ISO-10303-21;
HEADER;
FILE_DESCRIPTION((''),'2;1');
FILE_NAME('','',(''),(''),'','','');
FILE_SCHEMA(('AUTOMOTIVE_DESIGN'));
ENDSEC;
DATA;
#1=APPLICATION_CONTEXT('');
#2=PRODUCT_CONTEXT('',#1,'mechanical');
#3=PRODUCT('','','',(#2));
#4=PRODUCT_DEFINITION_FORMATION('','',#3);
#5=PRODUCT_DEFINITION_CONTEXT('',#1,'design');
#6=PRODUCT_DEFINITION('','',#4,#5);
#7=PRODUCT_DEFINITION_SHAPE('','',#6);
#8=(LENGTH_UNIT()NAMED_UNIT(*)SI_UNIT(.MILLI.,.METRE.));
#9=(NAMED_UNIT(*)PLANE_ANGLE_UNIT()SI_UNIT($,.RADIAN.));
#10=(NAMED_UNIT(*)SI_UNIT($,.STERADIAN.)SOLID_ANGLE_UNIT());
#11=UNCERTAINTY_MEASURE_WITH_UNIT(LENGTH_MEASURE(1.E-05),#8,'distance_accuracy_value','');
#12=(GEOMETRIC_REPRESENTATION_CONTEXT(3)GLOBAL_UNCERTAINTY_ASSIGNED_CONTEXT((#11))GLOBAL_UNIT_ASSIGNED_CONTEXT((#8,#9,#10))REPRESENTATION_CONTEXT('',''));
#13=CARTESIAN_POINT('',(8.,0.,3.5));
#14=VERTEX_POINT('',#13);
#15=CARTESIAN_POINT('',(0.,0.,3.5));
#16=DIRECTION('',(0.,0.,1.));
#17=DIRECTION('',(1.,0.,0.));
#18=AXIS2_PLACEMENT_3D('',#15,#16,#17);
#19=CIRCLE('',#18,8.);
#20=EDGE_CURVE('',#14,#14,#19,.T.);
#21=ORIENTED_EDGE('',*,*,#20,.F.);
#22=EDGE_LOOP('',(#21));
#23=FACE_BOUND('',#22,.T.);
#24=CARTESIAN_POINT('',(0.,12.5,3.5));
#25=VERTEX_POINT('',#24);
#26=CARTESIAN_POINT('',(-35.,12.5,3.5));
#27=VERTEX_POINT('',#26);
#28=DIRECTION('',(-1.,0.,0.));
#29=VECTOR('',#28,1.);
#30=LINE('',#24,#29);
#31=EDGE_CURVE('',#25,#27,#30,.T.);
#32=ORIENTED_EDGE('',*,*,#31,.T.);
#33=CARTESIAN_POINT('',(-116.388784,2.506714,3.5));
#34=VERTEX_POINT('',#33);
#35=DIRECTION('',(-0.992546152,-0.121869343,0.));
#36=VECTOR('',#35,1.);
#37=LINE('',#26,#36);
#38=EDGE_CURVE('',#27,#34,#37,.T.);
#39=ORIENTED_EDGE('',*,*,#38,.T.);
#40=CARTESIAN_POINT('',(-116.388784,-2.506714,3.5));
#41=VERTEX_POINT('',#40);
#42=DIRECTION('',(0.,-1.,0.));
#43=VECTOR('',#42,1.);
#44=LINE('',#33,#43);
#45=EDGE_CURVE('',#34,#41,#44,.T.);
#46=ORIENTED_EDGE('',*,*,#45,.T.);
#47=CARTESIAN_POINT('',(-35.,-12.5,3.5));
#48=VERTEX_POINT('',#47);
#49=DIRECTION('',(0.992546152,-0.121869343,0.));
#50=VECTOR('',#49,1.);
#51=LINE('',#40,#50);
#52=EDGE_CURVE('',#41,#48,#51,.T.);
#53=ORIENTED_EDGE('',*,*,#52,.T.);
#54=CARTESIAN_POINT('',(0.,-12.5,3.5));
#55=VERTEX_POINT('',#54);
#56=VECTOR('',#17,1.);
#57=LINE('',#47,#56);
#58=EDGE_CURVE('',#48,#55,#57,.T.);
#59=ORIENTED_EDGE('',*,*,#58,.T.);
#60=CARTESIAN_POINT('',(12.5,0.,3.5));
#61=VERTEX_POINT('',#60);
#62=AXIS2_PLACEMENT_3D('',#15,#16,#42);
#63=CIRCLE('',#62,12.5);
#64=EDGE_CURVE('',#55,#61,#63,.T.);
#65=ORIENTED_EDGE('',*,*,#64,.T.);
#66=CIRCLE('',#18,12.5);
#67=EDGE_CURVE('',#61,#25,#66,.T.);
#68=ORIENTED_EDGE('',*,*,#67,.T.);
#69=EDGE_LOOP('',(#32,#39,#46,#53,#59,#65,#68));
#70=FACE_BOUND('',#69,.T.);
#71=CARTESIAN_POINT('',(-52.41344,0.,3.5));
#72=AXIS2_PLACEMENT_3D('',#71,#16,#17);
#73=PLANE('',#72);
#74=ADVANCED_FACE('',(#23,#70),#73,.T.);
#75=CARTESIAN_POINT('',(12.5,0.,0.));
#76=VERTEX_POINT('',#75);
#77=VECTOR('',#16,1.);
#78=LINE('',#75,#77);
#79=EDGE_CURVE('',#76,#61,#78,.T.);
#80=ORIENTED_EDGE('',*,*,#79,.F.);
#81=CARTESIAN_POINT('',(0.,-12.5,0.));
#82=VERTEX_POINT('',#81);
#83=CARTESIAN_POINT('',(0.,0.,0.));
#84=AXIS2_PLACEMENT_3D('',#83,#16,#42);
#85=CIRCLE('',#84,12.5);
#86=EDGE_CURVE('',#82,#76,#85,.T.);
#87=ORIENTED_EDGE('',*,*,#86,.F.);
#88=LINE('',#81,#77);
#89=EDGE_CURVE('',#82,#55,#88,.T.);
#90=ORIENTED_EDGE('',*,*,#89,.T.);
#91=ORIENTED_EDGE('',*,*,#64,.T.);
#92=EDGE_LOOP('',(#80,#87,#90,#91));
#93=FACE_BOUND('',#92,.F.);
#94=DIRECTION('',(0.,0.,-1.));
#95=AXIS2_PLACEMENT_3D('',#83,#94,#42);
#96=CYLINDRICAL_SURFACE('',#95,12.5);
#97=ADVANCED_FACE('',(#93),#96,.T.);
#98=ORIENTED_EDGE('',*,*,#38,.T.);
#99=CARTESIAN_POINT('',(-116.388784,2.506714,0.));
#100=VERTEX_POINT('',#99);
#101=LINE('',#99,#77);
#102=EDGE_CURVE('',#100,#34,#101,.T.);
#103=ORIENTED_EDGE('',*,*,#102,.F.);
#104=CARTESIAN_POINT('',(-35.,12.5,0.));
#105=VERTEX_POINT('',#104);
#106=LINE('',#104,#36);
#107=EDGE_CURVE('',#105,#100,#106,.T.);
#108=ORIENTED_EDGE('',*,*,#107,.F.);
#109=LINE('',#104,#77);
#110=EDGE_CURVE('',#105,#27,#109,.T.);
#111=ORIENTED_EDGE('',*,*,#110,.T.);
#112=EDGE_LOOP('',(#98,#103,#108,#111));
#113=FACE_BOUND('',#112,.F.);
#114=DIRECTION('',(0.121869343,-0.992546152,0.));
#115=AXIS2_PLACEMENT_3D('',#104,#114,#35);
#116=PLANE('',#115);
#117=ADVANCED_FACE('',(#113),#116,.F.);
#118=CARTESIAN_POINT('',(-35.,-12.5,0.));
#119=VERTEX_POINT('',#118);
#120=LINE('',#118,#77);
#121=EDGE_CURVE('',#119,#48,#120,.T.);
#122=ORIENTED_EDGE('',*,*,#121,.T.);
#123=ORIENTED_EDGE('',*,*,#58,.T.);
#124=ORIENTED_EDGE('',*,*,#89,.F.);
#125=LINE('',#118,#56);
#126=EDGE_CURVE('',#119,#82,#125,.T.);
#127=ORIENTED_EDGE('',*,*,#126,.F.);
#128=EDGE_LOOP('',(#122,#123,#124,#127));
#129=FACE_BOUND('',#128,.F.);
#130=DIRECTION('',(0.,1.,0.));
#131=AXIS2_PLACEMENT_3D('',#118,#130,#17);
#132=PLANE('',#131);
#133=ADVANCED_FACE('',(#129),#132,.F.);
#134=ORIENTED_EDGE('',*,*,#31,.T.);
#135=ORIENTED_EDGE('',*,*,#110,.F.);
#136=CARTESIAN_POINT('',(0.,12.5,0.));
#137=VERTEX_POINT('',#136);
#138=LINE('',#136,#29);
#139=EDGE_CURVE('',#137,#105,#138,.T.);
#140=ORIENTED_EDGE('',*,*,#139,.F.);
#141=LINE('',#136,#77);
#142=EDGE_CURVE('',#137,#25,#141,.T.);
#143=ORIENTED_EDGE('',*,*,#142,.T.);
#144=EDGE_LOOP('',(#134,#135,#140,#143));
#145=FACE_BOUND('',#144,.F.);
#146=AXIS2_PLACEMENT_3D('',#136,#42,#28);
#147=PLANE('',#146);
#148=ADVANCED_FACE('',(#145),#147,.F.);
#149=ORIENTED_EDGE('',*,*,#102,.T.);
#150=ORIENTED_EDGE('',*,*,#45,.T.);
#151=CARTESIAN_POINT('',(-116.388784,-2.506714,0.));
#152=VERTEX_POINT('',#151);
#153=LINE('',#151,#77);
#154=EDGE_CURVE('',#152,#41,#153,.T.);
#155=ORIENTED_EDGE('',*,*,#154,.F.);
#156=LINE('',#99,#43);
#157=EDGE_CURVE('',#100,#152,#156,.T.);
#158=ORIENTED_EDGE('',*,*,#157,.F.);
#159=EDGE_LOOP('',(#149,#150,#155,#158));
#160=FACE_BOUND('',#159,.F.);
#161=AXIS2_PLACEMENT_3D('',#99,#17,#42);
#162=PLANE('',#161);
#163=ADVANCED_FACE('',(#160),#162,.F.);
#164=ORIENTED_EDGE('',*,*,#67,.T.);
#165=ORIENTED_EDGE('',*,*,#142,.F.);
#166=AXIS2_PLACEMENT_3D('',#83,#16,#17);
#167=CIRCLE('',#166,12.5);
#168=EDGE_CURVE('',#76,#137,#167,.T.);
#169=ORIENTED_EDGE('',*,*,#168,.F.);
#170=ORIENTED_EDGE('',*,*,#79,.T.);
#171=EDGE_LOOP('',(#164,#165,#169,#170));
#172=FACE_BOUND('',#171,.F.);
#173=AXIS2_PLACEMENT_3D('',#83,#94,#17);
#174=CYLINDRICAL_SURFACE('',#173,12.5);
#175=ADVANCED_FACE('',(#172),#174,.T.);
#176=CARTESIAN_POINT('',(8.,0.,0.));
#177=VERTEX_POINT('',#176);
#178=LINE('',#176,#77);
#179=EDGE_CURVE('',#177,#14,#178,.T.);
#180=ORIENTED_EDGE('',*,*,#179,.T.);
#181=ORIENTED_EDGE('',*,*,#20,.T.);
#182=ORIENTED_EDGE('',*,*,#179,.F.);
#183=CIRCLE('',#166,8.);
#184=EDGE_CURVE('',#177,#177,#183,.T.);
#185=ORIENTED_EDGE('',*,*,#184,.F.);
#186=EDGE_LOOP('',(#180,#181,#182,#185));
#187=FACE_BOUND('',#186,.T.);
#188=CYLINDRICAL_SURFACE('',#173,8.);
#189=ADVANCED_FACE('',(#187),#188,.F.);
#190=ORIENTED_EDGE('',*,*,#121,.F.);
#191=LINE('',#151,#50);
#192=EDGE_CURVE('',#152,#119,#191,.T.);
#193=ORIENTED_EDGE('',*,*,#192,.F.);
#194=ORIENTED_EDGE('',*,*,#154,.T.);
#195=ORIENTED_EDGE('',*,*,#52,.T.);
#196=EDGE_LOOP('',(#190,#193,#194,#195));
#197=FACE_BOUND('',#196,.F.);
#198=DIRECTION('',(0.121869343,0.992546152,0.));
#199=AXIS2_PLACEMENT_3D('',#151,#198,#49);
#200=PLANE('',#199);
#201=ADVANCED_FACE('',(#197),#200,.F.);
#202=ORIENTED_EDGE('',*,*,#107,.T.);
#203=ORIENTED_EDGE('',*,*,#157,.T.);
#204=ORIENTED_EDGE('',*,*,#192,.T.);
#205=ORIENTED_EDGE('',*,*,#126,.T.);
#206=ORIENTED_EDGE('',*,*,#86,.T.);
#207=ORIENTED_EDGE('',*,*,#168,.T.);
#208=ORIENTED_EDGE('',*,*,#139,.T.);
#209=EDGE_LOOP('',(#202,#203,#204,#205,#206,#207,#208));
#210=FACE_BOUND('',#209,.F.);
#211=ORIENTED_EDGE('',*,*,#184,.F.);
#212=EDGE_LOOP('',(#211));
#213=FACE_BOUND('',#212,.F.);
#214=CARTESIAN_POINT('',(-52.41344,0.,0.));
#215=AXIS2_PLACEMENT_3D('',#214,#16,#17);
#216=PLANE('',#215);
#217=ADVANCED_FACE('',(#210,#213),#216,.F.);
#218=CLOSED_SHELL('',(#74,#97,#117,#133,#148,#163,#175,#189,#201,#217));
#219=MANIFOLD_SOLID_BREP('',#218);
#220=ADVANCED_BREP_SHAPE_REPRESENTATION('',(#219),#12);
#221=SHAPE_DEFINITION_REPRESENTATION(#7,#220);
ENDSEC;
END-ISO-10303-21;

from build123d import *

# Parameters (mm, degrees)
F0_R     = 8
F1_DEPTH = 3.5


# Not quite as in the source:
# - the program builds the solid bodies; features that only make, move or delete a surface that nothing else refers to are left out


with BuildPart() as f1:
    # F0 (on Top) → F1 (new body)
    with BuildSketch(Plane.XY):
        with BuildLine():
            ThreePointArc((0, -12.5), (-12.5, 0), (0, 12.5))
            Line((0, 12.5), (-35, 12.5))
            Line((-35, 12.5), (-116.3887844346, 2.5067138408))
            Line((-116.3887844346, 2.5067138408), (-116.3887844346, -2.5067138408))
            Line((-116.3887844346, -2.5067138408), (-35, -12.5))
            Line((-35, -12.5), (0, -12.5))
        make_face()
        with BuildLine():
            ThreePointArc((0, -12.5), (8.8388347648, -8.8388347648), (12.5, 0))
            ThreePointArc((12.5, 0), (8.8388347648, 8.8388347648), (0, 12.5))
            ThreePointArc((0, 12.5), (-12.5, 0), (0, -12.5))
        make_face()
        Circle(F0_R, mode=Mode.SUBTRACT)
    extrude(amount=F1_DEPTH)


solid = f1.part
